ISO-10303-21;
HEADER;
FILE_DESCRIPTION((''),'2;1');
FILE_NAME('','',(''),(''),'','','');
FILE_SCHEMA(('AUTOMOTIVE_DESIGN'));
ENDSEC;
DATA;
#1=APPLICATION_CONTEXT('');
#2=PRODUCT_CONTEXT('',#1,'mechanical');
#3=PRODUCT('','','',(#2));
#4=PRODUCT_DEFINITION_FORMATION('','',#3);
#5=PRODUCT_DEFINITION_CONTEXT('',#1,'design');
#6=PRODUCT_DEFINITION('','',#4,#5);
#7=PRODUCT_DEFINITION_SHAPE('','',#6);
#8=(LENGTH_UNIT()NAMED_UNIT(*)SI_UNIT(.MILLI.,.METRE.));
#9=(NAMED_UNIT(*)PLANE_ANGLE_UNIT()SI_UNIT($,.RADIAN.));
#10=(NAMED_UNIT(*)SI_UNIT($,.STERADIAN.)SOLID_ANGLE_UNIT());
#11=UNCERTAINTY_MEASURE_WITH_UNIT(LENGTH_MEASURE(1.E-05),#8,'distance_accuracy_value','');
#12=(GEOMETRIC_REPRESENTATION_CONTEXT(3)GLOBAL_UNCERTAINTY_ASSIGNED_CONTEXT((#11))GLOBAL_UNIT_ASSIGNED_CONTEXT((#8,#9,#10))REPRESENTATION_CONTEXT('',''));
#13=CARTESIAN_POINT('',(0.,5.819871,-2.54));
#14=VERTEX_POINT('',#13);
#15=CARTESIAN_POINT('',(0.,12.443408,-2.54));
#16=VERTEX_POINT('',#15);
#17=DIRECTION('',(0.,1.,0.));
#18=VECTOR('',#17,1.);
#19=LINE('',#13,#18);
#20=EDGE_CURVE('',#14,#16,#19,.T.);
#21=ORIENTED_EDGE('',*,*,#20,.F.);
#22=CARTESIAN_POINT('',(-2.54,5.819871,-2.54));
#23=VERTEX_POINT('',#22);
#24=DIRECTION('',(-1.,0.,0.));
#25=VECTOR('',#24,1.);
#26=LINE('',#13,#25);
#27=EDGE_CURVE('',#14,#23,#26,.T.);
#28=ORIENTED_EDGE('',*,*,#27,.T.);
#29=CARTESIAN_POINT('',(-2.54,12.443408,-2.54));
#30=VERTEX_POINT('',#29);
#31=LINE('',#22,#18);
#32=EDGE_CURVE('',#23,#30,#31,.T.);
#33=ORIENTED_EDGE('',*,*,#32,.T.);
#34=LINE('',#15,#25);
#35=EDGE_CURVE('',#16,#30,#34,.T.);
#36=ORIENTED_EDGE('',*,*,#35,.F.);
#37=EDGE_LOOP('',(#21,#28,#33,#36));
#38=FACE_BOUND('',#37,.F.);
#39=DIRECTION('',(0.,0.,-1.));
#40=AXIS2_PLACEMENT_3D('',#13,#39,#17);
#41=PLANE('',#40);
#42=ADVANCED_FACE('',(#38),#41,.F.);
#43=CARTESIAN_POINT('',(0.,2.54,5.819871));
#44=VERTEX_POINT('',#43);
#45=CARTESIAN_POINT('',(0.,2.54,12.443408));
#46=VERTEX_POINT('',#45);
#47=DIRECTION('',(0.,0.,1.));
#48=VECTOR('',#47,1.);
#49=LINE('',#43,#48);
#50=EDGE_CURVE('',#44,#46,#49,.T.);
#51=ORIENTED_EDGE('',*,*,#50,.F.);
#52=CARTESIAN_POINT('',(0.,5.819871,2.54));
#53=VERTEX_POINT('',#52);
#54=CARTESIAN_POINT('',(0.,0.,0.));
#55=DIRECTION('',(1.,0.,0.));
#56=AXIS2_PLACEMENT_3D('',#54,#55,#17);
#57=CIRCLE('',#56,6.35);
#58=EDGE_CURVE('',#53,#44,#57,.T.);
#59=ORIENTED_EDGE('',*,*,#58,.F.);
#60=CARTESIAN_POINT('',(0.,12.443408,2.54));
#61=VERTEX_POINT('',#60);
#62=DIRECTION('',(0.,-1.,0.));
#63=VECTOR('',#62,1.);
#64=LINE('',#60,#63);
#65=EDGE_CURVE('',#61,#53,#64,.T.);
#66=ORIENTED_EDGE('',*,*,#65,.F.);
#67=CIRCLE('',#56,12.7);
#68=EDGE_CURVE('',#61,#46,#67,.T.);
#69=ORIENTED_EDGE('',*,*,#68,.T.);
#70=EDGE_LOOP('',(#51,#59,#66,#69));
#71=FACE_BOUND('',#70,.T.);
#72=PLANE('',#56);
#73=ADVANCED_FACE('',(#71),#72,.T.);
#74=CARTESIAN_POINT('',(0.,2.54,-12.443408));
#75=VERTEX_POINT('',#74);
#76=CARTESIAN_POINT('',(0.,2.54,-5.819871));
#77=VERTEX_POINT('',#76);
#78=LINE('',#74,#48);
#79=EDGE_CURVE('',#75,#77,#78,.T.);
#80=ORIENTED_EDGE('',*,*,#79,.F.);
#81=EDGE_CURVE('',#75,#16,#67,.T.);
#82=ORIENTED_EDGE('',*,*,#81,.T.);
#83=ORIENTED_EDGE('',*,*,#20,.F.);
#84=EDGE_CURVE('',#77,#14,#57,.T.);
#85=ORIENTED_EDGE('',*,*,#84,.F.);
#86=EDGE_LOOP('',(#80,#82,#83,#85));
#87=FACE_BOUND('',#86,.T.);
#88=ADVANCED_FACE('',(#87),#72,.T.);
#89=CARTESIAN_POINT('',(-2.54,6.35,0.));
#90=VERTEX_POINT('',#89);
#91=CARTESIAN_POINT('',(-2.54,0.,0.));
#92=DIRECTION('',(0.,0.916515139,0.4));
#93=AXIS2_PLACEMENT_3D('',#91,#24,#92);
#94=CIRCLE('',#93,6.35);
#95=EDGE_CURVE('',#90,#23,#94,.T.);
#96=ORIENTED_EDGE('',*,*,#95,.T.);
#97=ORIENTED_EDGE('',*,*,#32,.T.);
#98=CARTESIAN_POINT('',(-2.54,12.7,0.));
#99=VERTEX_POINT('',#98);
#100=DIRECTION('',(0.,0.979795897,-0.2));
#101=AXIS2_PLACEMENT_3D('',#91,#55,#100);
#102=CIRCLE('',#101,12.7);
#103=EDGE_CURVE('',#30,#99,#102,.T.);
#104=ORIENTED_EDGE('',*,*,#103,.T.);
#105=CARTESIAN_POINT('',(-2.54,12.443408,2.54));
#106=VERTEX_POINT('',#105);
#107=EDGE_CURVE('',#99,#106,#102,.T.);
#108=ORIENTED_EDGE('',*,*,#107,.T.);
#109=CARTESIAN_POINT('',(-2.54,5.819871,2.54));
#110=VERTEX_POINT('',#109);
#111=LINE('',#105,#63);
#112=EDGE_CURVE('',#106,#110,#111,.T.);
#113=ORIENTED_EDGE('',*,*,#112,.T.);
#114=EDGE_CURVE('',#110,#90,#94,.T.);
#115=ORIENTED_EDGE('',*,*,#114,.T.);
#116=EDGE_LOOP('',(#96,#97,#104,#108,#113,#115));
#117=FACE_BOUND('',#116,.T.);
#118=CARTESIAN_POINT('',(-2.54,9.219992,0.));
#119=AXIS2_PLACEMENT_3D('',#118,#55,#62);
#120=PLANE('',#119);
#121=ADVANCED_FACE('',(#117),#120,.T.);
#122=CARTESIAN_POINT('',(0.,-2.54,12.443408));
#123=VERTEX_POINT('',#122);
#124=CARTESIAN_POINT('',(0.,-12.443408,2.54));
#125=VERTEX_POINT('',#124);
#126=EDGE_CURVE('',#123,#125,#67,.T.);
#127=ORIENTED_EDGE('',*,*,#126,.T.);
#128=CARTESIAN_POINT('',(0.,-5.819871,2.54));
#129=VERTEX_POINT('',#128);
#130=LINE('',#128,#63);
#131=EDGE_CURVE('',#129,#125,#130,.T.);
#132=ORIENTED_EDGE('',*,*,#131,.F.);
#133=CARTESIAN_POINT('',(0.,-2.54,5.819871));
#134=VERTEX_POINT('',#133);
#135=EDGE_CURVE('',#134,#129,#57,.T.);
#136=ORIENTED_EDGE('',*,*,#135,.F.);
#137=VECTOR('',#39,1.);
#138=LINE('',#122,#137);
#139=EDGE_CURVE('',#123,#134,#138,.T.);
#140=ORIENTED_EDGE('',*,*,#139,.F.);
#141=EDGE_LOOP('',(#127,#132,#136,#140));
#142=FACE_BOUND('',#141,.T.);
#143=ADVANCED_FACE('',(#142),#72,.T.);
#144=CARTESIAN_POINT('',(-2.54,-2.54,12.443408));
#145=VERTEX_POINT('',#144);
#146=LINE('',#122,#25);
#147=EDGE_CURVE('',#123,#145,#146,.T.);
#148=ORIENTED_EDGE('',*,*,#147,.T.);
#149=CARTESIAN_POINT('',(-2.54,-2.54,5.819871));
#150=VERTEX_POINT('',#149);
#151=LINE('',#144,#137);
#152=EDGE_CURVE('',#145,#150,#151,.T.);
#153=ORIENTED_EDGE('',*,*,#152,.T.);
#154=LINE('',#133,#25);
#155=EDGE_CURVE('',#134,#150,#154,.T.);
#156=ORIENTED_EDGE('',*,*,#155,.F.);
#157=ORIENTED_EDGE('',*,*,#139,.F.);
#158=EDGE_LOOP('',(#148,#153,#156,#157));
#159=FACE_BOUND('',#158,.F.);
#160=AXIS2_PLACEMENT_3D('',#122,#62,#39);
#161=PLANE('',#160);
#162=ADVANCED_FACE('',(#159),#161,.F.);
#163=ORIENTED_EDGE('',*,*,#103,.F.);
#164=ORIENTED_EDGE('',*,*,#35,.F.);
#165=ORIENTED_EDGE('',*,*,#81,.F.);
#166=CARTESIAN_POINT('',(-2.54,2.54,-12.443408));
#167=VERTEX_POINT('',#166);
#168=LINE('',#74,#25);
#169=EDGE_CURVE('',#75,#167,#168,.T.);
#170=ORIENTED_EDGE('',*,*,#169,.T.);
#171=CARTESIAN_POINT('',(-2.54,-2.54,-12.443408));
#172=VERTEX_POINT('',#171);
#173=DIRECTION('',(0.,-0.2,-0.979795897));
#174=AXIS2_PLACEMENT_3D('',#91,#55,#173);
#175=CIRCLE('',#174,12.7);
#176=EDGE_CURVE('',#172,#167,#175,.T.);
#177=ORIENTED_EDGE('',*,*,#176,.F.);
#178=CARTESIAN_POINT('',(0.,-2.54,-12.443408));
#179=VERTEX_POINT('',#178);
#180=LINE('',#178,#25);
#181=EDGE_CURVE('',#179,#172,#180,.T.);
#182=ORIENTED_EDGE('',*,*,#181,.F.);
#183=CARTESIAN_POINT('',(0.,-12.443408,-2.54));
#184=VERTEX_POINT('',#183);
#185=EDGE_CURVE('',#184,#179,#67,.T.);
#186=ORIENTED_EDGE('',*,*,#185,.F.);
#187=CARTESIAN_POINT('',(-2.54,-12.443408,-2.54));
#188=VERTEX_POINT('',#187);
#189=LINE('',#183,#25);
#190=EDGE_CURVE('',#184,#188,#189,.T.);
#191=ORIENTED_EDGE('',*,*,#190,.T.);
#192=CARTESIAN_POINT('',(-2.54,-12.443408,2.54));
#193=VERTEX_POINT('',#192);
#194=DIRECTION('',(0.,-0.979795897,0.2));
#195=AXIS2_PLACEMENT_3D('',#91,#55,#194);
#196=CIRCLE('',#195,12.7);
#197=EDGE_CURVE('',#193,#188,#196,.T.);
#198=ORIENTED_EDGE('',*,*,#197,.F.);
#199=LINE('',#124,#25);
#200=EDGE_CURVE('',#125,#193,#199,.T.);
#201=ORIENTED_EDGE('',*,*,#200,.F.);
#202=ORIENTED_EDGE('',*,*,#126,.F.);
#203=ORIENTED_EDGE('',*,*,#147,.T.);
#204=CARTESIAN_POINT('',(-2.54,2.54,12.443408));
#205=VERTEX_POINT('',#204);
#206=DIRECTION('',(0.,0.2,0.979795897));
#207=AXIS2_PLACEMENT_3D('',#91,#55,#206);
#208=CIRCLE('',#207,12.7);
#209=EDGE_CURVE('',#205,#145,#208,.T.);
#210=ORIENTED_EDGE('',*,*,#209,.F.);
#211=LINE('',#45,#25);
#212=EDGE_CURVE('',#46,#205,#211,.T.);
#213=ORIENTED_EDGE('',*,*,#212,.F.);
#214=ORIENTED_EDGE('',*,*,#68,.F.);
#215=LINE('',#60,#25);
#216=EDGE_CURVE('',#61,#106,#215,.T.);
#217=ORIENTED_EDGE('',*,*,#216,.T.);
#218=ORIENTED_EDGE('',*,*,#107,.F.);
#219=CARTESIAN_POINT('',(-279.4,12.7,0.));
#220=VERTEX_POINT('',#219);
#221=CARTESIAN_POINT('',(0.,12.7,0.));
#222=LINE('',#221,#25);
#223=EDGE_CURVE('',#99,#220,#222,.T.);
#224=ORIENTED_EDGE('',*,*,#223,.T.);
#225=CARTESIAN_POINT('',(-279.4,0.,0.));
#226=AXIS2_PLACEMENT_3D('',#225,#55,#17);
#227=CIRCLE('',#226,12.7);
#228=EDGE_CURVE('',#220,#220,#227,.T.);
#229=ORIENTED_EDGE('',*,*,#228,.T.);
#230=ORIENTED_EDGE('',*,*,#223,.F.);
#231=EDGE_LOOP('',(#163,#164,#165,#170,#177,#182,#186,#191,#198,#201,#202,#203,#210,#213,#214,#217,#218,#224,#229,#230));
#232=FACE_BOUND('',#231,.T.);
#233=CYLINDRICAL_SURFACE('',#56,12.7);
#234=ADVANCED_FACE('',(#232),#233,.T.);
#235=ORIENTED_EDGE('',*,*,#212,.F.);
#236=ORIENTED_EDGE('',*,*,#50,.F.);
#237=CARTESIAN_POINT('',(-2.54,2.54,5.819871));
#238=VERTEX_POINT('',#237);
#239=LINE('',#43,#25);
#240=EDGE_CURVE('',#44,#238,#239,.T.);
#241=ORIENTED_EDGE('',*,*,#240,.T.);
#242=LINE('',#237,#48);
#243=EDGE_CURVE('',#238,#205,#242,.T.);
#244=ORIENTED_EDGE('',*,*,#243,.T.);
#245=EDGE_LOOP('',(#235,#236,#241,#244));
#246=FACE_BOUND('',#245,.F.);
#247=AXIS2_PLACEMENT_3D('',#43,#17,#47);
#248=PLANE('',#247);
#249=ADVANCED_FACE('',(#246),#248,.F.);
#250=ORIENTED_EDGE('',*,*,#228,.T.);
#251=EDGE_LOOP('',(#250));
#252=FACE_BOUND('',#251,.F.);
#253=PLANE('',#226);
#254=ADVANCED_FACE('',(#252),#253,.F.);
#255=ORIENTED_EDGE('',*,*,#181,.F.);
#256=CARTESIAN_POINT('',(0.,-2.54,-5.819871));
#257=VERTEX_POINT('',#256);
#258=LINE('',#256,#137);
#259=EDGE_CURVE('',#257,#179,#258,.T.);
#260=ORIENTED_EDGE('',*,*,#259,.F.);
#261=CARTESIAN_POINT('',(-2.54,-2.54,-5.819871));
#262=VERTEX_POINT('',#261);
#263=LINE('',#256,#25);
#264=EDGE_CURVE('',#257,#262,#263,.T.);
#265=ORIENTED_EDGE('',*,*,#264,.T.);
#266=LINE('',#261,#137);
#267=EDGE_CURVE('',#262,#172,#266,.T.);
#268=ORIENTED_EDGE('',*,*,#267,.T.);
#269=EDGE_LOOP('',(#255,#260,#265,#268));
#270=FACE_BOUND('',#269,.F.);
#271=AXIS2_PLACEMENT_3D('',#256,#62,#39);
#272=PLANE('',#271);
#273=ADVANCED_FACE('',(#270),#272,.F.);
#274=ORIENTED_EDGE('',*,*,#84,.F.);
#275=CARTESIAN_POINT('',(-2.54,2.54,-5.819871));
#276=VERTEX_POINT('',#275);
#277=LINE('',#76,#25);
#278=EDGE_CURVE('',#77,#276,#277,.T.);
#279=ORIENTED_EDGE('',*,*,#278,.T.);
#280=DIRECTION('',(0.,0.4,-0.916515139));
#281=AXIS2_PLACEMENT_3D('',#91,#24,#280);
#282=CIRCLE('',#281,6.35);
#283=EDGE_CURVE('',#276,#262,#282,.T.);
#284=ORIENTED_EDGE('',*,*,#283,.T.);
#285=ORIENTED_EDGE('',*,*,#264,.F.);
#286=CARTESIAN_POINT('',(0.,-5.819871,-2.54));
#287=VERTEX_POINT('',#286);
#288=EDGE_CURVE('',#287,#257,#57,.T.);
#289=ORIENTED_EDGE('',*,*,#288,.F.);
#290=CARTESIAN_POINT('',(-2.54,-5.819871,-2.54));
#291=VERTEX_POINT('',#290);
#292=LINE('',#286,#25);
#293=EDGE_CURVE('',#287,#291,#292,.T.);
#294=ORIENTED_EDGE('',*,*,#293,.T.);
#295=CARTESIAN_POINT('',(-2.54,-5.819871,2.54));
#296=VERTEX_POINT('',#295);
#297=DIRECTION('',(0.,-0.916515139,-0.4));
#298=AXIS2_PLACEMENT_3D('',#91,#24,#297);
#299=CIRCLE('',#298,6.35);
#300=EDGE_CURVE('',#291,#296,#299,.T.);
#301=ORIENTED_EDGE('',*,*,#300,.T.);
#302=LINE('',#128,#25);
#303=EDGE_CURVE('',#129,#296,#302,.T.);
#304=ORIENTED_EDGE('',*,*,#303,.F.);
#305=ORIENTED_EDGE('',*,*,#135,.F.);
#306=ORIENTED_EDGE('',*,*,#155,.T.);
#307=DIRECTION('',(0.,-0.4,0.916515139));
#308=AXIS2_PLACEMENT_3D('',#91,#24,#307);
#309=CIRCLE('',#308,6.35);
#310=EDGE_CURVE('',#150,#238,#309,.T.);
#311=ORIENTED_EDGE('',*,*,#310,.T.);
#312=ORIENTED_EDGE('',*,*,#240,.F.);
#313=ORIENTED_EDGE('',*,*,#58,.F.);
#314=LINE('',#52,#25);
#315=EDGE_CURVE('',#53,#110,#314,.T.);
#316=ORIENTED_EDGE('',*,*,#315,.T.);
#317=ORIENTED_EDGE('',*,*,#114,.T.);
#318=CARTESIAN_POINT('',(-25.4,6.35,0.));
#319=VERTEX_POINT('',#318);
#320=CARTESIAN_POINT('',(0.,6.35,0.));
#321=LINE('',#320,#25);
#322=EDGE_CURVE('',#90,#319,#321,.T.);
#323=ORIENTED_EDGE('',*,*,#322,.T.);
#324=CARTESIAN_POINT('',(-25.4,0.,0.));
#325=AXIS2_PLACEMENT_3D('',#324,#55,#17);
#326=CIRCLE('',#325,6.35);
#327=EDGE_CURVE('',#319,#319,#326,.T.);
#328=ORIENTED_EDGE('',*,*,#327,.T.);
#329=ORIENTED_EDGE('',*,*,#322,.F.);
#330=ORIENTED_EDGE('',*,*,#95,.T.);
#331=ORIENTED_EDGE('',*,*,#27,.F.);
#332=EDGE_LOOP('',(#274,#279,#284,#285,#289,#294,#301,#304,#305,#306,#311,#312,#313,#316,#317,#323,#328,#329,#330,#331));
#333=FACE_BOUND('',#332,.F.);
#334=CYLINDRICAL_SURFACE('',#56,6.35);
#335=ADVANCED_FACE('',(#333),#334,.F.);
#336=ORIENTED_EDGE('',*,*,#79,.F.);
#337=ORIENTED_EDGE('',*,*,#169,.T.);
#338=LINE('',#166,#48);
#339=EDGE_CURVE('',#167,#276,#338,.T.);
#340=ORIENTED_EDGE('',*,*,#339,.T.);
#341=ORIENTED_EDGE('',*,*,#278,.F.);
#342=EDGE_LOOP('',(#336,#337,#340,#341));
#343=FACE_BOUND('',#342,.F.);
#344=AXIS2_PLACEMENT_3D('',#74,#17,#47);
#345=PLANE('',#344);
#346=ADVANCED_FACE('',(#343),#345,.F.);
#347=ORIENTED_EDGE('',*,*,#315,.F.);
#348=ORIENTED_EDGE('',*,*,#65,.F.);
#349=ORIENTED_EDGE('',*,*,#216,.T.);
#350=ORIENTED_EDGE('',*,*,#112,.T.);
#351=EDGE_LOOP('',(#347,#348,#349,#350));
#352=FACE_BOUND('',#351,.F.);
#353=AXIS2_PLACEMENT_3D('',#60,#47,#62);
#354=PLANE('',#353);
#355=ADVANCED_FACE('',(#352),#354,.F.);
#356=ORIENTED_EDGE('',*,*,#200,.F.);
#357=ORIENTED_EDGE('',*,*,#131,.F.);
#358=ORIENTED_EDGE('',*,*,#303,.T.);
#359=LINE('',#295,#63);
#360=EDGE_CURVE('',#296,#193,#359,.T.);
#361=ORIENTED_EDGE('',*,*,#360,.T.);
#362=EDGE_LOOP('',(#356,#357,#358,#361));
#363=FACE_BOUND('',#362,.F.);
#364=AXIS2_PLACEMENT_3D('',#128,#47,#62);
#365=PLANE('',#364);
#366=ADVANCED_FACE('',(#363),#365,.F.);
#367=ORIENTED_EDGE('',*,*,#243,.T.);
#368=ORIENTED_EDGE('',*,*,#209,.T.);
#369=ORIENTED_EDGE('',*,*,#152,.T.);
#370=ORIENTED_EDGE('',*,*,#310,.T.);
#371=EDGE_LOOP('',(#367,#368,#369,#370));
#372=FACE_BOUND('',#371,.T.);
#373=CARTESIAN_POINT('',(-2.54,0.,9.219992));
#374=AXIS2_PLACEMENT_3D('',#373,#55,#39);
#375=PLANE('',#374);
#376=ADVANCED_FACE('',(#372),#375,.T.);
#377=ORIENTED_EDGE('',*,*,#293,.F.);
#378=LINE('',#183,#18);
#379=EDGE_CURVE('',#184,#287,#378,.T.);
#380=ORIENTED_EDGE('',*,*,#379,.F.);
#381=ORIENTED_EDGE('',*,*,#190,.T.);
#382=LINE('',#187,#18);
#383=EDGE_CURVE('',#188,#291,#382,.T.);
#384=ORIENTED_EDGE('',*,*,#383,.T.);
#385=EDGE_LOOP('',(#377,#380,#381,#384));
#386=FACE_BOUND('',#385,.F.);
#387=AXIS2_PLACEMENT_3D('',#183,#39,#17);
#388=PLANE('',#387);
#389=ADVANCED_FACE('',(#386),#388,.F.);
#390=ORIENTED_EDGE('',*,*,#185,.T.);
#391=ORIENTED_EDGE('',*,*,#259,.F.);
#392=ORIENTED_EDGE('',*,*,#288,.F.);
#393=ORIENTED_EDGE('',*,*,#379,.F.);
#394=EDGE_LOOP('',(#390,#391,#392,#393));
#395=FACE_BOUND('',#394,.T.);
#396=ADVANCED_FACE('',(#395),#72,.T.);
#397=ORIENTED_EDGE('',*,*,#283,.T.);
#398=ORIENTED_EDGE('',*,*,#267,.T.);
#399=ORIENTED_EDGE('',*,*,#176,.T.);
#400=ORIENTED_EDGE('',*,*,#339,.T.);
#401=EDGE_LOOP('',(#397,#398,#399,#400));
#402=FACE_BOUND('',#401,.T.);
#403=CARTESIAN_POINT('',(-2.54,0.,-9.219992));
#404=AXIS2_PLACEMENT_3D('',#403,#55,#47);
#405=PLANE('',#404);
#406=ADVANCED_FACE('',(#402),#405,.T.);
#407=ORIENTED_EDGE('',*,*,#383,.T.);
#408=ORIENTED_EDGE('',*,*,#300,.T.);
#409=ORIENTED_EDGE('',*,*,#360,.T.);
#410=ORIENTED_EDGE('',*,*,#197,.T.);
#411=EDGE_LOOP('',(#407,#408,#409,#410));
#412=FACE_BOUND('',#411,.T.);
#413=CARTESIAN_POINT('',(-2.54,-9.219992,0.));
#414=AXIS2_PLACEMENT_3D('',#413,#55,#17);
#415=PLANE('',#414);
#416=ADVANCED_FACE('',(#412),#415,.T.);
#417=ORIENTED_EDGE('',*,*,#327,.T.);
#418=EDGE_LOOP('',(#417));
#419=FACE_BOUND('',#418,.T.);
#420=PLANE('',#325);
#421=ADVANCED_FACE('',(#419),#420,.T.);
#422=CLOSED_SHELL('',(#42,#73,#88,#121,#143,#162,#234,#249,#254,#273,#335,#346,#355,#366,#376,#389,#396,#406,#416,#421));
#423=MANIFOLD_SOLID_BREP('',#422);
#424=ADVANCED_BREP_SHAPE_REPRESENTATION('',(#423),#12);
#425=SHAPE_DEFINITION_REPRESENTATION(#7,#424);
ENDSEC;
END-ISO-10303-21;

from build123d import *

# Parameters (mm, degrees)
F0_R            = 12.7
F1_DEPTH        = 279.4
F2_R            = 6.35
F3_DEPTH        = 25.4
F5_DEPTH        = 2.54
F5_COPIES_COUNT = 4


# Not quite as in the source:
# - a pattern or mirror of a feature is missing from the dataset's text; its kind, count and spacing are read off the source's solid
# - a feature names something its author has since deleted; it is built from what else it names


with BuildPart() as f1:
    # F0 (on Right) → F1 (new body)
    with BuildSketch(Plane.YZ):
        Circle(F0_R)
    extrude(amount=-F1_DEPTH)

    # F2 (on face) → F3 (cut)
    with BuildSketch(Plane.YZ):
        Circle(F2_R)
    extrude(amount=-F3_DEPTH, mode=Mode.SUBTRACT)

    # F4 (on face) → F5 (cut)
    with BuildSketch(Plane.YZ):
        with BuildLine():
            ThreePointArc((-5.8198711326, -2.54), (-6.35, 0), (-5.8198711326, 2.54))
            Line((-5.8198711326, 2.54), (-12.4434078933, 2.54))
            ThreePointArc((-12.4434078933, 2.54), (-12.7, 0), (-12.4434078933, -2.54))
            Line((-12.4434078933, -2.54), (-5.8198711326, -2.54))
        make_face()
    f5 = extrude(amount=-F5_DEPTH, mode=Mode.SUBTRACT)

    # F5_copies: F5 ×4 about axis
    f5_copies_axis = Axis((0, 0, 0), (1, 0, 0))
    for i in range(1, F5_COPIES_COUNT):
        add(f5.rotate(f5_copies_axis, i * 360 / F5_COPIES_COUNT), mode=Mode.SUBTRACT)


solid = f1.part
